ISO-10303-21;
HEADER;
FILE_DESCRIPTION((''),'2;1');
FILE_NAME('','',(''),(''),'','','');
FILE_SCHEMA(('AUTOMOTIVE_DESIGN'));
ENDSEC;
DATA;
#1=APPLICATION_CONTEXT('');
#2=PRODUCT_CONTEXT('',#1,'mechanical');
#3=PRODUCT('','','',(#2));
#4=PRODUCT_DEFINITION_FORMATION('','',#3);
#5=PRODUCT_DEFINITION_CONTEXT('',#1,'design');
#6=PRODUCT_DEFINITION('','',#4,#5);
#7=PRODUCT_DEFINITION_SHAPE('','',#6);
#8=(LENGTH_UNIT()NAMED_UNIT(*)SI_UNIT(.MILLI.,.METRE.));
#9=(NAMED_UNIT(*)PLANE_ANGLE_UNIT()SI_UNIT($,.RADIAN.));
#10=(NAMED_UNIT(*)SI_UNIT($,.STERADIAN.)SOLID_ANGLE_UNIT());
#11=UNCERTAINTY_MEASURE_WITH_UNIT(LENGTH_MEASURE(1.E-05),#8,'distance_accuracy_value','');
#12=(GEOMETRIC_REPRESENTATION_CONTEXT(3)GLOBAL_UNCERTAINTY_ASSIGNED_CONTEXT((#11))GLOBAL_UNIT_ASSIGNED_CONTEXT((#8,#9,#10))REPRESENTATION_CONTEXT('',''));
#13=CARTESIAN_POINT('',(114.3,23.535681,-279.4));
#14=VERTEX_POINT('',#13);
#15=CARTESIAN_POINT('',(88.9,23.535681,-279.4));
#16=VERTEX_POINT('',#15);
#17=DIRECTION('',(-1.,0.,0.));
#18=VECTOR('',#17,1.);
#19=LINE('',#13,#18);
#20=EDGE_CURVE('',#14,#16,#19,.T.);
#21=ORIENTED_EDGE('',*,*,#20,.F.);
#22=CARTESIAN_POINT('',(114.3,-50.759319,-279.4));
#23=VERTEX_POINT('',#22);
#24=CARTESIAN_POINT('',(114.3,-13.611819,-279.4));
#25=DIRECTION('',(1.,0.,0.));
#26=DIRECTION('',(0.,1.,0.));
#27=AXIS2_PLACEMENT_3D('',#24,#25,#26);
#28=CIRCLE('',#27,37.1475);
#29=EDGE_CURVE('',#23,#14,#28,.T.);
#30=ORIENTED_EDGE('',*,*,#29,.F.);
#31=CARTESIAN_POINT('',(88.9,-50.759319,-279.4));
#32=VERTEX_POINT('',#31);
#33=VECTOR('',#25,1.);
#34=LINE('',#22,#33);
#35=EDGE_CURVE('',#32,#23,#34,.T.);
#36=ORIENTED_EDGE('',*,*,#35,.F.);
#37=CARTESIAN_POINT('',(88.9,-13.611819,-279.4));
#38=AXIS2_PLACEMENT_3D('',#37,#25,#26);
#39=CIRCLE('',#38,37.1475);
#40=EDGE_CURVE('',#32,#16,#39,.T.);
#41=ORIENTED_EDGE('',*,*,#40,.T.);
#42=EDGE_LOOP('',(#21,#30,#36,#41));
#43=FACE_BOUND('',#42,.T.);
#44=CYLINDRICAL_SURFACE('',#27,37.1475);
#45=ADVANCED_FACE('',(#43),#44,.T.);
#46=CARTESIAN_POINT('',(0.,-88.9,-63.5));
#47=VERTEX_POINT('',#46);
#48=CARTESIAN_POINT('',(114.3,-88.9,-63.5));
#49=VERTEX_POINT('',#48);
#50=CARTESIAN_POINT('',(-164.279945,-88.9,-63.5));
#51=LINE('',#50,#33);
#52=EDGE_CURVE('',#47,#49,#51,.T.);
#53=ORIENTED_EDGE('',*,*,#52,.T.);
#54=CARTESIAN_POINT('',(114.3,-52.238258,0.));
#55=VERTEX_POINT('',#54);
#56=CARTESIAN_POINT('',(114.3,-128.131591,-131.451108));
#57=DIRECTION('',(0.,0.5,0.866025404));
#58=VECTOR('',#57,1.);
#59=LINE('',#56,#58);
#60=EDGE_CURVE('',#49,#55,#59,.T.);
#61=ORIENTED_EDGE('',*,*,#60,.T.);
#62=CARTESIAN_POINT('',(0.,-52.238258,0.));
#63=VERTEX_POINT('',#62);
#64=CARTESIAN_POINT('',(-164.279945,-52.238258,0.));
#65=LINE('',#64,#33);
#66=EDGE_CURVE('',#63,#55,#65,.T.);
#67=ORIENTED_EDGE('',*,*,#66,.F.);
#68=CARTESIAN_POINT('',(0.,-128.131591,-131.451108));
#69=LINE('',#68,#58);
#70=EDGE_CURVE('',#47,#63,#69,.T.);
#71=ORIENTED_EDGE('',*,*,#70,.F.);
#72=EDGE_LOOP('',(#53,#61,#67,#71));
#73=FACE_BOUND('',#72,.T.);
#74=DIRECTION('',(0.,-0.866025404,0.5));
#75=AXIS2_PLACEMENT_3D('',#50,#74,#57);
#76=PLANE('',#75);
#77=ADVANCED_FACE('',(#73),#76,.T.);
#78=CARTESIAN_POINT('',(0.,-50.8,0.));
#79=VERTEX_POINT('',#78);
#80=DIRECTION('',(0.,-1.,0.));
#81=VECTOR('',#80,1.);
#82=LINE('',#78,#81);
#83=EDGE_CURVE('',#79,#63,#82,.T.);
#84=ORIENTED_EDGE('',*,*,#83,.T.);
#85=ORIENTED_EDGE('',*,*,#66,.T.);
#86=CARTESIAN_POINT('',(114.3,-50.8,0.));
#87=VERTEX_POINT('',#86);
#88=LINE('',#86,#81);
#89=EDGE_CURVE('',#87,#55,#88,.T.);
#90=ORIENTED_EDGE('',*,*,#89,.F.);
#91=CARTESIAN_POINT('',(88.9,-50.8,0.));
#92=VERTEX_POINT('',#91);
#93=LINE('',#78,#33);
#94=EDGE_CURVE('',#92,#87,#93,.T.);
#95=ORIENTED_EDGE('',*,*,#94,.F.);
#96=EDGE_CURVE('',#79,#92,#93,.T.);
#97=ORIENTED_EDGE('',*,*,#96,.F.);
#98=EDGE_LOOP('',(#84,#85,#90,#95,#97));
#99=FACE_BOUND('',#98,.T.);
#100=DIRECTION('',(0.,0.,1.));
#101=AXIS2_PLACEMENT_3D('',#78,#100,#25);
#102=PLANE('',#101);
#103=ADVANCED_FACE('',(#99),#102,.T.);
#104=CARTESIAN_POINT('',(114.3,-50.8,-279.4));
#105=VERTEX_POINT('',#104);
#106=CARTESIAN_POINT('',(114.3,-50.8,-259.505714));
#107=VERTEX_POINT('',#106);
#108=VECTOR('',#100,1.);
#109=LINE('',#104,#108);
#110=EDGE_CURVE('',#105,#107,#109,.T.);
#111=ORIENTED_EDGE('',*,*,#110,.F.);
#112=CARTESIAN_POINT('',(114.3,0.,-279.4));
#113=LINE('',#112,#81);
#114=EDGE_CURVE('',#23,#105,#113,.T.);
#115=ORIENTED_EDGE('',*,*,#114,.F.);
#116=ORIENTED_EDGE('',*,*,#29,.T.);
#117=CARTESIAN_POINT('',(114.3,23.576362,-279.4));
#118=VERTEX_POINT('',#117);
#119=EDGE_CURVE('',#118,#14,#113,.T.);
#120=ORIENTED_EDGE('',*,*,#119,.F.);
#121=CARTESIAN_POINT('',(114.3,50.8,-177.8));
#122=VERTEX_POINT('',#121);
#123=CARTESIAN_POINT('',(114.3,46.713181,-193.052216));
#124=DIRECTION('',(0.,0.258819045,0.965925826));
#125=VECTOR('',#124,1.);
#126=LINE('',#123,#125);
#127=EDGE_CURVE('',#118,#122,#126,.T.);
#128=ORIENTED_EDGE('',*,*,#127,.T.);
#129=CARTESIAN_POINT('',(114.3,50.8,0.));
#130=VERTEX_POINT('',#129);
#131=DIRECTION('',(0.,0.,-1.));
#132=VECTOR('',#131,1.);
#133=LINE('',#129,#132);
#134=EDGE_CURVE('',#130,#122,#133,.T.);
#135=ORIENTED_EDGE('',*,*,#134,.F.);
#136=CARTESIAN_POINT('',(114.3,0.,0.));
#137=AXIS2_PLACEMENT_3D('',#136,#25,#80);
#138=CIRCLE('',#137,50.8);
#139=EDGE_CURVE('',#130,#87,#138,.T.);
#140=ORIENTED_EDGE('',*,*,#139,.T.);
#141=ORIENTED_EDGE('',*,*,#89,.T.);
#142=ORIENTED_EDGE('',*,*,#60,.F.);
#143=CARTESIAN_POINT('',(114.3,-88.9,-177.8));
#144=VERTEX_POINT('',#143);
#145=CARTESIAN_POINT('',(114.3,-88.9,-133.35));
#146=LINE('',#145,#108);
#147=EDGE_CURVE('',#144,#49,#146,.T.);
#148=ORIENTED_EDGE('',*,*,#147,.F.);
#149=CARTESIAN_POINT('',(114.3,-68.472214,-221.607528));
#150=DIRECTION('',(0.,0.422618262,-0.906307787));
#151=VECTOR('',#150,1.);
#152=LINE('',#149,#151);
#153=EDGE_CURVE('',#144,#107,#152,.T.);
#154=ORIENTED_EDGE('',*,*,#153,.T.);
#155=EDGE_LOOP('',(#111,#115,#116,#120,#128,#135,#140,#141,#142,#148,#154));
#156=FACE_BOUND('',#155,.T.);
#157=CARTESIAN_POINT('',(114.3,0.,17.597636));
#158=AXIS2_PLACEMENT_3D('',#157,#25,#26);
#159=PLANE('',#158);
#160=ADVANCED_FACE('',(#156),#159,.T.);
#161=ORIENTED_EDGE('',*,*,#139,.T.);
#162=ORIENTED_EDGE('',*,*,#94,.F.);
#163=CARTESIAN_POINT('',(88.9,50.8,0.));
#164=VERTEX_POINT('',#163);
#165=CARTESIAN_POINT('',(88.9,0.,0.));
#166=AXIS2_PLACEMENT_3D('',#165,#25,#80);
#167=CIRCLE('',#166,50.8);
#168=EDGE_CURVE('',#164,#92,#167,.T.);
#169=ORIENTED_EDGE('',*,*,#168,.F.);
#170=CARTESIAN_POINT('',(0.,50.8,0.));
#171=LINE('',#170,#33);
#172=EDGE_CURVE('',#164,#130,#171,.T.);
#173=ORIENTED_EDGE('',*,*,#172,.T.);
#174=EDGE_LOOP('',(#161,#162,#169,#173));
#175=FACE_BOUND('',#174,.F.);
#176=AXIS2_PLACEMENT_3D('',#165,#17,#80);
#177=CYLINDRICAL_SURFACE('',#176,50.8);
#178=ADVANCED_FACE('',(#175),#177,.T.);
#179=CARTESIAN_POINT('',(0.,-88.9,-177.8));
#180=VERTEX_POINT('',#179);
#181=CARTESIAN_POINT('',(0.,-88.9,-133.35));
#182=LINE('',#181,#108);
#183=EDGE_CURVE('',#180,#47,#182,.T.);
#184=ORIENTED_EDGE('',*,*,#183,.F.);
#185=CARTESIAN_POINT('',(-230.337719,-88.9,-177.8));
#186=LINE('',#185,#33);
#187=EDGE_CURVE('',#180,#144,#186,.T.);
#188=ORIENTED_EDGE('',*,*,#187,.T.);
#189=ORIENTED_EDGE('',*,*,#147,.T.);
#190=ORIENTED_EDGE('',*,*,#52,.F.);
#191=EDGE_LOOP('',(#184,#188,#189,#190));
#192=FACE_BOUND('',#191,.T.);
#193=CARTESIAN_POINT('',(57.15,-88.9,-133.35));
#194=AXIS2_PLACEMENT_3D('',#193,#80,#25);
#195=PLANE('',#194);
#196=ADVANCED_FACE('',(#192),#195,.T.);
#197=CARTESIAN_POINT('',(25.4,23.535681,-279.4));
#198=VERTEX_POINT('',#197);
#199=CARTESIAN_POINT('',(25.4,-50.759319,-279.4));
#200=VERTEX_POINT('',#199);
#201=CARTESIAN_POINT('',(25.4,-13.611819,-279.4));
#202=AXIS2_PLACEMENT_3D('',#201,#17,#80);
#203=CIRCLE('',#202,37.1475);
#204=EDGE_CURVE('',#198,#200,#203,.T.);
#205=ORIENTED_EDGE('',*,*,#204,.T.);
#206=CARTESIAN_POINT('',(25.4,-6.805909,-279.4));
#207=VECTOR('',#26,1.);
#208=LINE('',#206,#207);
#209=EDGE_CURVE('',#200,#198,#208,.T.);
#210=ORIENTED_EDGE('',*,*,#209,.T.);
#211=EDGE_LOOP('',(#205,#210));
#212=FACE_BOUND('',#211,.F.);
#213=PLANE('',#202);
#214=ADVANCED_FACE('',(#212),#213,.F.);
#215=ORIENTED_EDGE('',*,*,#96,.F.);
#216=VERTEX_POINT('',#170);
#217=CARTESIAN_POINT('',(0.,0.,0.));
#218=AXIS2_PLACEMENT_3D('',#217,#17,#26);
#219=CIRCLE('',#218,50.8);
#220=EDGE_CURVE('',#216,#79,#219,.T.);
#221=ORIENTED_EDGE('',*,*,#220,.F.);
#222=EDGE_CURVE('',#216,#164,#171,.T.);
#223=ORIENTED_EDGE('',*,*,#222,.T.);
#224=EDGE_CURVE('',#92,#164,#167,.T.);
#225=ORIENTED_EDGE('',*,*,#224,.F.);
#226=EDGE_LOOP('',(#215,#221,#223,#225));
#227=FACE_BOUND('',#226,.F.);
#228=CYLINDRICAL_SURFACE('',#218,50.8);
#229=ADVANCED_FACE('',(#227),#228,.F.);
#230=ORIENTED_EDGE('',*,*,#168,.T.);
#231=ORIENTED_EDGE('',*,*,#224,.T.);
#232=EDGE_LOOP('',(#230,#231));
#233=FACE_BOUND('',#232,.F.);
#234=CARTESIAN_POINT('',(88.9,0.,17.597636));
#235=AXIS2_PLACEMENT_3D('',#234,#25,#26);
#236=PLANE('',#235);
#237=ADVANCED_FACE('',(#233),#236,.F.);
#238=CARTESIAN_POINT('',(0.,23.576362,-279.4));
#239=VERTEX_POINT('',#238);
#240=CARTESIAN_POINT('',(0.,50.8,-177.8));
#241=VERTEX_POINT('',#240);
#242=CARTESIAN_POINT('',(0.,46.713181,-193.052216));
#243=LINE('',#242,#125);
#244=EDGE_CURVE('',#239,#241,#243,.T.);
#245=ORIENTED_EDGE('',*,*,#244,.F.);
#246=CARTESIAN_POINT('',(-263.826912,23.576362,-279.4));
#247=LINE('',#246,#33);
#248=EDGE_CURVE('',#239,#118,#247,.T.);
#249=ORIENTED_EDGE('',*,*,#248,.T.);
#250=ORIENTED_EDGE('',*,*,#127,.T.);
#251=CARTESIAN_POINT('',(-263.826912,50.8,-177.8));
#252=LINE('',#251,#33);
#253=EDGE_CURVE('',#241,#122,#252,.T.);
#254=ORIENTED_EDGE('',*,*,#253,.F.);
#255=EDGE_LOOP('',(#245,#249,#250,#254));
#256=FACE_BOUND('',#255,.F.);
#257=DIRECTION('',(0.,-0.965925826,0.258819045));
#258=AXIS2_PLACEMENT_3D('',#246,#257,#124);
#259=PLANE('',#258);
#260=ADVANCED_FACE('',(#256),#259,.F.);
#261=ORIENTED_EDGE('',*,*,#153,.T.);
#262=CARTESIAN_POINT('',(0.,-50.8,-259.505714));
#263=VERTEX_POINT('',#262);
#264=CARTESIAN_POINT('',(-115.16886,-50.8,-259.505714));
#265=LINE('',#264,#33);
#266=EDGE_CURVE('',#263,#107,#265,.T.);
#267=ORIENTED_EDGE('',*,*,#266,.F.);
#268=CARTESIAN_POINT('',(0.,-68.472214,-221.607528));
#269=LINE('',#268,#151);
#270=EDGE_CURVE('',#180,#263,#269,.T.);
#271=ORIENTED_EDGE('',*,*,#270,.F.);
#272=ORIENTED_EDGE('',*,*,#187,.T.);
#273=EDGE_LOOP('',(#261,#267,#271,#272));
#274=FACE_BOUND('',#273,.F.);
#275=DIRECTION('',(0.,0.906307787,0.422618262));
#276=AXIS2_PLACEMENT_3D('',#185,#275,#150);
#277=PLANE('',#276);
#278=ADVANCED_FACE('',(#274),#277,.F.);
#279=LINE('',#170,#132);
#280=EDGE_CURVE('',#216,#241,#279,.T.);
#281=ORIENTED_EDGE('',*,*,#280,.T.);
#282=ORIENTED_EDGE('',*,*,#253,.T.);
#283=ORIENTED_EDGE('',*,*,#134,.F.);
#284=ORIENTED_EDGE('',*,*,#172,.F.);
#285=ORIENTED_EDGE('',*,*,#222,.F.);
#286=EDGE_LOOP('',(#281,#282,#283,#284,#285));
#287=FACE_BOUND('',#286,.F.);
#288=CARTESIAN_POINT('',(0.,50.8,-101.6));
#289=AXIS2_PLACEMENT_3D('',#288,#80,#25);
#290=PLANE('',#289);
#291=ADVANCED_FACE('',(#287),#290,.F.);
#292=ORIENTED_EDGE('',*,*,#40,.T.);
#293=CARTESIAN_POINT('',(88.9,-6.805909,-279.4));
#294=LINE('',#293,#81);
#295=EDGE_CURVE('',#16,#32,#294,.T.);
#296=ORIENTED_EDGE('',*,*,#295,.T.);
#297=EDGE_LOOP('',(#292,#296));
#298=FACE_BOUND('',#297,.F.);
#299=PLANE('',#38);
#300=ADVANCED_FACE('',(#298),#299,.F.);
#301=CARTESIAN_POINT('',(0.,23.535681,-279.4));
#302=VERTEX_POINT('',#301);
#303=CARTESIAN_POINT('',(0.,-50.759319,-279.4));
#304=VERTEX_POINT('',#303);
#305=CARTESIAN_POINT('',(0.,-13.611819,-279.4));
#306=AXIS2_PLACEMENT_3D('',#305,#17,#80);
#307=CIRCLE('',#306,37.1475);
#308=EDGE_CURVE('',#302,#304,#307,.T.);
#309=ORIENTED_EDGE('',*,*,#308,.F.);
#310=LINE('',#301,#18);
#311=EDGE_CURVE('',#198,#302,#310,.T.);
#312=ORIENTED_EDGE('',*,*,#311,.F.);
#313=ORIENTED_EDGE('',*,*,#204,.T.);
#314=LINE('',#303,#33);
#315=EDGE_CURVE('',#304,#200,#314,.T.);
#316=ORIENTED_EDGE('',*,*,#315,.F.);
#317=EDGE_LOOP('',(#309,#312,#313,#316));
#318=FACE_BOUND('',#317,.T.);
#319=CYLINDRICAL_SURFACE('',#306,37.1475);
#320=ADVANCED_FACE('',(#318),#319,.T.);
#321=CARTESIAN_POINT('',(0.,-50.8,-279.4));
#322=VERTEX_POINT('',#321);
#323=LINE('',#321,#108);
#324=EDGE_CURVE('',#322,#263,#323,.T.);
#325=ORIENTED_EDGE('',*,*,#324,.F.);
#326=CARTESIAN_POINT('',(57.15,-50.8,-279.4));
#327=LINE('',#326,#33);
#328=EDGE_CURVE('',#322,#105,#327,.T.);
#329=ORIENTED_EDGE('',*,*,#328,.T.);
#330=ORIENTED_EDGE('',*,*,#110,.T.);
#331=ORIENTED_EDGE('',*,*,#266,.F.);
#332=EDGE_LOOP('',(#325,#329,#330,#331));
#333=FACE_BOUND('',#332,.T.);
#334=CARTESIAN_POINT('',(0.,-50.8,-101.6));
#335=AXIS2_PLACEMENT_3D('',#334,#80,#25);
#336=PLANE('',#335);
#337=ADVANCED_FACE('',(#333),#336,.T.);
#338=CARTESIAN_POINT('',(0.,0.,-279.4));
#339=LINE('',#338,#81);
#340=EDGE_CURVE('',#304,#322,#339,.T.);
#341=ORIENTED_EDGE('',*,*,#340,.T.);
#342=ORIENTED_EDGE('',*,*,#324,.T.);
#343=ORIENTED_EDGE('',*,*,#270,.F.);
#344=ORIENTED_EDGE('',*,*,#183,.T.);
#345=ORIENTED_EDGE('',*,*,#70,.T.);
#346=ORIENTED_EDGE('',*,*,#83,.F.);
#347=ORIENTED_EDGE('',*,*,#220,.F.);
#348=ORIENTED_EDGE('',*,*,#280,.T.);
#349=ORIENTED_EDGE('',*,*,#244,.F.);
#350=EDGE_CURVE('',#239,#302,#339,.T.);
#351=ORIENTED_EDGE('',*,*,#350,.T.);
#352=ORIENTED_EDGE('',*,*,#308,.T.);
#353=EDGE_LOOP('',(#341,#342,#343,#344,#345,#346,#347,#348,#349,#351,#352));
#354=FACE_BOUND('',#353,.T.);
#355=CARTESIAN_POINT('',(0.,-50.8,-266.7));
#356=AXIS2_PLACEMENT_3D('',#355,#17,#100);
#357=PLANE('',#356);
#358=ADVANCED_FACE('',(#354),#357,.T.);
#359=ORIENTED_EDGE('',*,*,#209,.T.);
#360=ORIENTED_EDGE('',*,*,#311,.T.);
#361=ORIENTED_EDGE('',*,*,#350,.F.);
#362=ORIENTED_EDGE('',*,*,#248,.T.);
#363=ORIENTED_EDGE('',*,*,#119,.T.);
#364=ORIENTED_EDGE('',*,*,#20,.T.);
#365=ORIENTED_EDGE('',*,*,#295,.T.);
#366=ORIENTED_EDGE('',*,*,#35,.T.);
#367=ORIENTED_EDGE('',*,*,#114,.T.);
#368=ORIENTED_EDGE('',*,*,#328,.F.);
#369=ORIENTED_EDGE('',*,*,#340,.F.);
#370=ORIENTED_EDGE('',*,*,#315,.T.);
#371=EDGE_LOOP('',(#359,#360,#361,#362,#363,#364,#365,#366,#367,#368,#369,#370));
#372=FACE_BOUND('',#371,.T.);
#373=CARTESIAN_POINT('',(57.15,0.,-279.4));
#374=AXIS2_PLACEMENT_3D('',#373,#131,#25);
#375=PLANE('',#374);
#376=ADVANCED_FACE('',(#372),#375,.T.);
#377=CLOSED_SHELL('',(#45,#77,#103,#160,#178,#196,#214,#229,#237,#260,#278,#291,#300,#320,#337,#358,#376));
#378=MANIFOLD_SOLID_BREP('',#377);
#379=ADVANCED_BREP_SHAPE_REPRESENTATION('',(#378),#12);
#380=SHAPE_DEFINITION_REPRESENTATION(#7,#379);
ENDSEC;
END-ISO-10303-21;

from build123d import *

# Parameters (mm, degrees)
F1_DEPTH     = 19.05
F2_DEPTH     = 114.3
F3_W         = 114.3
F3_H         = 101.6
F4_DEPTH     = 177.8
F5_T1_DEPTH  = 641.9538230647
F6_R         = 37.1475
F7_DEPTH     = 25.4
F8_R         = 37.1475
F9_DEPTH     = 25.4
F10_W        = 114.3
F10_H        = 266.7
F11_DEPTH    = 38.1
F12_T4_DEPTH = 574.9754388191
F13_T1_DEPTH = 442.85989084
F14_START    = 88.9
F14_DEPTH    = 25.4


# Not quite as in the source:
# - a fillet or chamfer that OpenCascade refuses, or shapes differently, is made with other operations: its cross-section is extruded or revolved along the edge and cut away or added


with BuildPart() as f1:
    # F0 (on Right) → F1 (new body)
    with BuildSketch(Plane.YZ):
        with BuildLine():
            Line((50.8, -101.6), (50.8, 0))
            ThreePointArc((50.8, 0), (0, -50.8), (-50.8, 0))
            Line((-50.8, 0), (-50.8, -101.6))
            Line((-50.8, -101.6), (50.8, -101.6))
        make_face()
    extrude(amount=F1_DEPTH)

    # F0 (on Right) → F2 (join)
    with BuildSketch(Plane.YZ):
        with BuildLine():
            Line((50.8, -101.6), (50.8, 0))
            ThreePointArc((50.8, 0), (0, -50.8), (-50.8, 0))
            Line((-50.8, 0), (-50.8, -101.6))
            Line((-50.8, -101.6), (50.8, -101.6))
        make_face()
    extrude(amount=F2_DEPTH)

    # F3 (on face) → F4 (join)
    with BuildSketch(Plane(origin=(0, 0, -101.6), x_dir=(1, 0, 0), z_dir=(0, 0, -1))):
        with Locations((57.15, 0)):
            Rectangle(F3_W, F3_H)
    extrude(amount=F4_DEPTH)

    # F5: chamfer of 101.6 x 27.223637951 on 1 edges, made by hand

    # F5_s2 → F5_t1 (cut)
    with BuildSketch(Plane.YZ.offset(-263.8269115324)):
        Polygon((23.576362049, -279.4), (50.8, -177.8), (50.8, -279.4), align=None)
    extrude(amount=F5_T1_DEPTH, mode=Mode.SUBTRACT)

    # F6 (on face) → F7 (join)
    with BuildSketch(Plane(origin=(0, 0, 0), x_dir=(0, -1, 0), z_dir=(-1, 0, 0))):
        with Locations((13.6118189755, -279.4)):
            Circle(F6_R)
    extrude(amount=-F7_DEPTH)

    # F8 (on face) → F9 (join)
    with BuildSketch(Plane.YZ.offset(114.3)):
        with Locations((-13.6118189755, -279.4)):
            Circle(F8_R)
    extrude(amount=-F9_DEPTH)

    # F10 (on face) → F11 (join)
    with BuildSketch(Plane.XZ.offset(50.8)):
        with Locations((57.15, -133.35)):
            Rectangle(F10_W, F10_H)
    extrude(amount=F11_DEPTH)

    # F12: chamfer of 88.9 x 41.45475081 on 1 edges, made by hand


with BuildPart() as f12_tool2:
    # F12_s3 → F12_t4 (new body)
    with BuildSketch(Plane.YZ.offset(-230.3377194096)):
        Polygon((-88.9, -177.8), (-47.44524919, -266.7), (-88.9, -266.7), align=None)
    extrude(amount=F12_T4_DEPTH)

    split(bisect_by=Plane.XZ.offset(50.8), keep=Keep.TOP)


with BuildPart() as f1_1:
    add(f1.part)

    # F12_t1: cut F12_tool2
    add(f12_tool2.part, mode=Mode.SUBTRACT)

    # F13: chamfer of 63.5 x 36.6617420935 on 1 edges, made by hand

    # F13_s2 → F13_t1 (cut)
    with BuildSketch(Plane.YZ.offset(-164.27994542)):
        Polygon((-88.9, -63.5), (-52.2382579065, 0), (-88.9, 0), align=None)
    extrude(amount=F13_T1_DEPTH, mode=Mode.SUBTRACT)

    # F0 (on Right) → F14 (join)
    with BuildSketch(Plane.YZ.offset(F14_START)):
        with BuildLine():
            Line((-50.8, 0), (50.8, 0))
            ThreePointArc((50.8, 0), (0, 50.8), (-50.8, 0))
        make_face()
        with BuildLine():
            ThreePointArc((-50.8, 0), (0, -50.8), (50.8, 0))
            Line((50.8, 0), (-50.8, 0))
        make_face()
    extrude(amount=F14_DEPTH)


solid = f1_1.part
